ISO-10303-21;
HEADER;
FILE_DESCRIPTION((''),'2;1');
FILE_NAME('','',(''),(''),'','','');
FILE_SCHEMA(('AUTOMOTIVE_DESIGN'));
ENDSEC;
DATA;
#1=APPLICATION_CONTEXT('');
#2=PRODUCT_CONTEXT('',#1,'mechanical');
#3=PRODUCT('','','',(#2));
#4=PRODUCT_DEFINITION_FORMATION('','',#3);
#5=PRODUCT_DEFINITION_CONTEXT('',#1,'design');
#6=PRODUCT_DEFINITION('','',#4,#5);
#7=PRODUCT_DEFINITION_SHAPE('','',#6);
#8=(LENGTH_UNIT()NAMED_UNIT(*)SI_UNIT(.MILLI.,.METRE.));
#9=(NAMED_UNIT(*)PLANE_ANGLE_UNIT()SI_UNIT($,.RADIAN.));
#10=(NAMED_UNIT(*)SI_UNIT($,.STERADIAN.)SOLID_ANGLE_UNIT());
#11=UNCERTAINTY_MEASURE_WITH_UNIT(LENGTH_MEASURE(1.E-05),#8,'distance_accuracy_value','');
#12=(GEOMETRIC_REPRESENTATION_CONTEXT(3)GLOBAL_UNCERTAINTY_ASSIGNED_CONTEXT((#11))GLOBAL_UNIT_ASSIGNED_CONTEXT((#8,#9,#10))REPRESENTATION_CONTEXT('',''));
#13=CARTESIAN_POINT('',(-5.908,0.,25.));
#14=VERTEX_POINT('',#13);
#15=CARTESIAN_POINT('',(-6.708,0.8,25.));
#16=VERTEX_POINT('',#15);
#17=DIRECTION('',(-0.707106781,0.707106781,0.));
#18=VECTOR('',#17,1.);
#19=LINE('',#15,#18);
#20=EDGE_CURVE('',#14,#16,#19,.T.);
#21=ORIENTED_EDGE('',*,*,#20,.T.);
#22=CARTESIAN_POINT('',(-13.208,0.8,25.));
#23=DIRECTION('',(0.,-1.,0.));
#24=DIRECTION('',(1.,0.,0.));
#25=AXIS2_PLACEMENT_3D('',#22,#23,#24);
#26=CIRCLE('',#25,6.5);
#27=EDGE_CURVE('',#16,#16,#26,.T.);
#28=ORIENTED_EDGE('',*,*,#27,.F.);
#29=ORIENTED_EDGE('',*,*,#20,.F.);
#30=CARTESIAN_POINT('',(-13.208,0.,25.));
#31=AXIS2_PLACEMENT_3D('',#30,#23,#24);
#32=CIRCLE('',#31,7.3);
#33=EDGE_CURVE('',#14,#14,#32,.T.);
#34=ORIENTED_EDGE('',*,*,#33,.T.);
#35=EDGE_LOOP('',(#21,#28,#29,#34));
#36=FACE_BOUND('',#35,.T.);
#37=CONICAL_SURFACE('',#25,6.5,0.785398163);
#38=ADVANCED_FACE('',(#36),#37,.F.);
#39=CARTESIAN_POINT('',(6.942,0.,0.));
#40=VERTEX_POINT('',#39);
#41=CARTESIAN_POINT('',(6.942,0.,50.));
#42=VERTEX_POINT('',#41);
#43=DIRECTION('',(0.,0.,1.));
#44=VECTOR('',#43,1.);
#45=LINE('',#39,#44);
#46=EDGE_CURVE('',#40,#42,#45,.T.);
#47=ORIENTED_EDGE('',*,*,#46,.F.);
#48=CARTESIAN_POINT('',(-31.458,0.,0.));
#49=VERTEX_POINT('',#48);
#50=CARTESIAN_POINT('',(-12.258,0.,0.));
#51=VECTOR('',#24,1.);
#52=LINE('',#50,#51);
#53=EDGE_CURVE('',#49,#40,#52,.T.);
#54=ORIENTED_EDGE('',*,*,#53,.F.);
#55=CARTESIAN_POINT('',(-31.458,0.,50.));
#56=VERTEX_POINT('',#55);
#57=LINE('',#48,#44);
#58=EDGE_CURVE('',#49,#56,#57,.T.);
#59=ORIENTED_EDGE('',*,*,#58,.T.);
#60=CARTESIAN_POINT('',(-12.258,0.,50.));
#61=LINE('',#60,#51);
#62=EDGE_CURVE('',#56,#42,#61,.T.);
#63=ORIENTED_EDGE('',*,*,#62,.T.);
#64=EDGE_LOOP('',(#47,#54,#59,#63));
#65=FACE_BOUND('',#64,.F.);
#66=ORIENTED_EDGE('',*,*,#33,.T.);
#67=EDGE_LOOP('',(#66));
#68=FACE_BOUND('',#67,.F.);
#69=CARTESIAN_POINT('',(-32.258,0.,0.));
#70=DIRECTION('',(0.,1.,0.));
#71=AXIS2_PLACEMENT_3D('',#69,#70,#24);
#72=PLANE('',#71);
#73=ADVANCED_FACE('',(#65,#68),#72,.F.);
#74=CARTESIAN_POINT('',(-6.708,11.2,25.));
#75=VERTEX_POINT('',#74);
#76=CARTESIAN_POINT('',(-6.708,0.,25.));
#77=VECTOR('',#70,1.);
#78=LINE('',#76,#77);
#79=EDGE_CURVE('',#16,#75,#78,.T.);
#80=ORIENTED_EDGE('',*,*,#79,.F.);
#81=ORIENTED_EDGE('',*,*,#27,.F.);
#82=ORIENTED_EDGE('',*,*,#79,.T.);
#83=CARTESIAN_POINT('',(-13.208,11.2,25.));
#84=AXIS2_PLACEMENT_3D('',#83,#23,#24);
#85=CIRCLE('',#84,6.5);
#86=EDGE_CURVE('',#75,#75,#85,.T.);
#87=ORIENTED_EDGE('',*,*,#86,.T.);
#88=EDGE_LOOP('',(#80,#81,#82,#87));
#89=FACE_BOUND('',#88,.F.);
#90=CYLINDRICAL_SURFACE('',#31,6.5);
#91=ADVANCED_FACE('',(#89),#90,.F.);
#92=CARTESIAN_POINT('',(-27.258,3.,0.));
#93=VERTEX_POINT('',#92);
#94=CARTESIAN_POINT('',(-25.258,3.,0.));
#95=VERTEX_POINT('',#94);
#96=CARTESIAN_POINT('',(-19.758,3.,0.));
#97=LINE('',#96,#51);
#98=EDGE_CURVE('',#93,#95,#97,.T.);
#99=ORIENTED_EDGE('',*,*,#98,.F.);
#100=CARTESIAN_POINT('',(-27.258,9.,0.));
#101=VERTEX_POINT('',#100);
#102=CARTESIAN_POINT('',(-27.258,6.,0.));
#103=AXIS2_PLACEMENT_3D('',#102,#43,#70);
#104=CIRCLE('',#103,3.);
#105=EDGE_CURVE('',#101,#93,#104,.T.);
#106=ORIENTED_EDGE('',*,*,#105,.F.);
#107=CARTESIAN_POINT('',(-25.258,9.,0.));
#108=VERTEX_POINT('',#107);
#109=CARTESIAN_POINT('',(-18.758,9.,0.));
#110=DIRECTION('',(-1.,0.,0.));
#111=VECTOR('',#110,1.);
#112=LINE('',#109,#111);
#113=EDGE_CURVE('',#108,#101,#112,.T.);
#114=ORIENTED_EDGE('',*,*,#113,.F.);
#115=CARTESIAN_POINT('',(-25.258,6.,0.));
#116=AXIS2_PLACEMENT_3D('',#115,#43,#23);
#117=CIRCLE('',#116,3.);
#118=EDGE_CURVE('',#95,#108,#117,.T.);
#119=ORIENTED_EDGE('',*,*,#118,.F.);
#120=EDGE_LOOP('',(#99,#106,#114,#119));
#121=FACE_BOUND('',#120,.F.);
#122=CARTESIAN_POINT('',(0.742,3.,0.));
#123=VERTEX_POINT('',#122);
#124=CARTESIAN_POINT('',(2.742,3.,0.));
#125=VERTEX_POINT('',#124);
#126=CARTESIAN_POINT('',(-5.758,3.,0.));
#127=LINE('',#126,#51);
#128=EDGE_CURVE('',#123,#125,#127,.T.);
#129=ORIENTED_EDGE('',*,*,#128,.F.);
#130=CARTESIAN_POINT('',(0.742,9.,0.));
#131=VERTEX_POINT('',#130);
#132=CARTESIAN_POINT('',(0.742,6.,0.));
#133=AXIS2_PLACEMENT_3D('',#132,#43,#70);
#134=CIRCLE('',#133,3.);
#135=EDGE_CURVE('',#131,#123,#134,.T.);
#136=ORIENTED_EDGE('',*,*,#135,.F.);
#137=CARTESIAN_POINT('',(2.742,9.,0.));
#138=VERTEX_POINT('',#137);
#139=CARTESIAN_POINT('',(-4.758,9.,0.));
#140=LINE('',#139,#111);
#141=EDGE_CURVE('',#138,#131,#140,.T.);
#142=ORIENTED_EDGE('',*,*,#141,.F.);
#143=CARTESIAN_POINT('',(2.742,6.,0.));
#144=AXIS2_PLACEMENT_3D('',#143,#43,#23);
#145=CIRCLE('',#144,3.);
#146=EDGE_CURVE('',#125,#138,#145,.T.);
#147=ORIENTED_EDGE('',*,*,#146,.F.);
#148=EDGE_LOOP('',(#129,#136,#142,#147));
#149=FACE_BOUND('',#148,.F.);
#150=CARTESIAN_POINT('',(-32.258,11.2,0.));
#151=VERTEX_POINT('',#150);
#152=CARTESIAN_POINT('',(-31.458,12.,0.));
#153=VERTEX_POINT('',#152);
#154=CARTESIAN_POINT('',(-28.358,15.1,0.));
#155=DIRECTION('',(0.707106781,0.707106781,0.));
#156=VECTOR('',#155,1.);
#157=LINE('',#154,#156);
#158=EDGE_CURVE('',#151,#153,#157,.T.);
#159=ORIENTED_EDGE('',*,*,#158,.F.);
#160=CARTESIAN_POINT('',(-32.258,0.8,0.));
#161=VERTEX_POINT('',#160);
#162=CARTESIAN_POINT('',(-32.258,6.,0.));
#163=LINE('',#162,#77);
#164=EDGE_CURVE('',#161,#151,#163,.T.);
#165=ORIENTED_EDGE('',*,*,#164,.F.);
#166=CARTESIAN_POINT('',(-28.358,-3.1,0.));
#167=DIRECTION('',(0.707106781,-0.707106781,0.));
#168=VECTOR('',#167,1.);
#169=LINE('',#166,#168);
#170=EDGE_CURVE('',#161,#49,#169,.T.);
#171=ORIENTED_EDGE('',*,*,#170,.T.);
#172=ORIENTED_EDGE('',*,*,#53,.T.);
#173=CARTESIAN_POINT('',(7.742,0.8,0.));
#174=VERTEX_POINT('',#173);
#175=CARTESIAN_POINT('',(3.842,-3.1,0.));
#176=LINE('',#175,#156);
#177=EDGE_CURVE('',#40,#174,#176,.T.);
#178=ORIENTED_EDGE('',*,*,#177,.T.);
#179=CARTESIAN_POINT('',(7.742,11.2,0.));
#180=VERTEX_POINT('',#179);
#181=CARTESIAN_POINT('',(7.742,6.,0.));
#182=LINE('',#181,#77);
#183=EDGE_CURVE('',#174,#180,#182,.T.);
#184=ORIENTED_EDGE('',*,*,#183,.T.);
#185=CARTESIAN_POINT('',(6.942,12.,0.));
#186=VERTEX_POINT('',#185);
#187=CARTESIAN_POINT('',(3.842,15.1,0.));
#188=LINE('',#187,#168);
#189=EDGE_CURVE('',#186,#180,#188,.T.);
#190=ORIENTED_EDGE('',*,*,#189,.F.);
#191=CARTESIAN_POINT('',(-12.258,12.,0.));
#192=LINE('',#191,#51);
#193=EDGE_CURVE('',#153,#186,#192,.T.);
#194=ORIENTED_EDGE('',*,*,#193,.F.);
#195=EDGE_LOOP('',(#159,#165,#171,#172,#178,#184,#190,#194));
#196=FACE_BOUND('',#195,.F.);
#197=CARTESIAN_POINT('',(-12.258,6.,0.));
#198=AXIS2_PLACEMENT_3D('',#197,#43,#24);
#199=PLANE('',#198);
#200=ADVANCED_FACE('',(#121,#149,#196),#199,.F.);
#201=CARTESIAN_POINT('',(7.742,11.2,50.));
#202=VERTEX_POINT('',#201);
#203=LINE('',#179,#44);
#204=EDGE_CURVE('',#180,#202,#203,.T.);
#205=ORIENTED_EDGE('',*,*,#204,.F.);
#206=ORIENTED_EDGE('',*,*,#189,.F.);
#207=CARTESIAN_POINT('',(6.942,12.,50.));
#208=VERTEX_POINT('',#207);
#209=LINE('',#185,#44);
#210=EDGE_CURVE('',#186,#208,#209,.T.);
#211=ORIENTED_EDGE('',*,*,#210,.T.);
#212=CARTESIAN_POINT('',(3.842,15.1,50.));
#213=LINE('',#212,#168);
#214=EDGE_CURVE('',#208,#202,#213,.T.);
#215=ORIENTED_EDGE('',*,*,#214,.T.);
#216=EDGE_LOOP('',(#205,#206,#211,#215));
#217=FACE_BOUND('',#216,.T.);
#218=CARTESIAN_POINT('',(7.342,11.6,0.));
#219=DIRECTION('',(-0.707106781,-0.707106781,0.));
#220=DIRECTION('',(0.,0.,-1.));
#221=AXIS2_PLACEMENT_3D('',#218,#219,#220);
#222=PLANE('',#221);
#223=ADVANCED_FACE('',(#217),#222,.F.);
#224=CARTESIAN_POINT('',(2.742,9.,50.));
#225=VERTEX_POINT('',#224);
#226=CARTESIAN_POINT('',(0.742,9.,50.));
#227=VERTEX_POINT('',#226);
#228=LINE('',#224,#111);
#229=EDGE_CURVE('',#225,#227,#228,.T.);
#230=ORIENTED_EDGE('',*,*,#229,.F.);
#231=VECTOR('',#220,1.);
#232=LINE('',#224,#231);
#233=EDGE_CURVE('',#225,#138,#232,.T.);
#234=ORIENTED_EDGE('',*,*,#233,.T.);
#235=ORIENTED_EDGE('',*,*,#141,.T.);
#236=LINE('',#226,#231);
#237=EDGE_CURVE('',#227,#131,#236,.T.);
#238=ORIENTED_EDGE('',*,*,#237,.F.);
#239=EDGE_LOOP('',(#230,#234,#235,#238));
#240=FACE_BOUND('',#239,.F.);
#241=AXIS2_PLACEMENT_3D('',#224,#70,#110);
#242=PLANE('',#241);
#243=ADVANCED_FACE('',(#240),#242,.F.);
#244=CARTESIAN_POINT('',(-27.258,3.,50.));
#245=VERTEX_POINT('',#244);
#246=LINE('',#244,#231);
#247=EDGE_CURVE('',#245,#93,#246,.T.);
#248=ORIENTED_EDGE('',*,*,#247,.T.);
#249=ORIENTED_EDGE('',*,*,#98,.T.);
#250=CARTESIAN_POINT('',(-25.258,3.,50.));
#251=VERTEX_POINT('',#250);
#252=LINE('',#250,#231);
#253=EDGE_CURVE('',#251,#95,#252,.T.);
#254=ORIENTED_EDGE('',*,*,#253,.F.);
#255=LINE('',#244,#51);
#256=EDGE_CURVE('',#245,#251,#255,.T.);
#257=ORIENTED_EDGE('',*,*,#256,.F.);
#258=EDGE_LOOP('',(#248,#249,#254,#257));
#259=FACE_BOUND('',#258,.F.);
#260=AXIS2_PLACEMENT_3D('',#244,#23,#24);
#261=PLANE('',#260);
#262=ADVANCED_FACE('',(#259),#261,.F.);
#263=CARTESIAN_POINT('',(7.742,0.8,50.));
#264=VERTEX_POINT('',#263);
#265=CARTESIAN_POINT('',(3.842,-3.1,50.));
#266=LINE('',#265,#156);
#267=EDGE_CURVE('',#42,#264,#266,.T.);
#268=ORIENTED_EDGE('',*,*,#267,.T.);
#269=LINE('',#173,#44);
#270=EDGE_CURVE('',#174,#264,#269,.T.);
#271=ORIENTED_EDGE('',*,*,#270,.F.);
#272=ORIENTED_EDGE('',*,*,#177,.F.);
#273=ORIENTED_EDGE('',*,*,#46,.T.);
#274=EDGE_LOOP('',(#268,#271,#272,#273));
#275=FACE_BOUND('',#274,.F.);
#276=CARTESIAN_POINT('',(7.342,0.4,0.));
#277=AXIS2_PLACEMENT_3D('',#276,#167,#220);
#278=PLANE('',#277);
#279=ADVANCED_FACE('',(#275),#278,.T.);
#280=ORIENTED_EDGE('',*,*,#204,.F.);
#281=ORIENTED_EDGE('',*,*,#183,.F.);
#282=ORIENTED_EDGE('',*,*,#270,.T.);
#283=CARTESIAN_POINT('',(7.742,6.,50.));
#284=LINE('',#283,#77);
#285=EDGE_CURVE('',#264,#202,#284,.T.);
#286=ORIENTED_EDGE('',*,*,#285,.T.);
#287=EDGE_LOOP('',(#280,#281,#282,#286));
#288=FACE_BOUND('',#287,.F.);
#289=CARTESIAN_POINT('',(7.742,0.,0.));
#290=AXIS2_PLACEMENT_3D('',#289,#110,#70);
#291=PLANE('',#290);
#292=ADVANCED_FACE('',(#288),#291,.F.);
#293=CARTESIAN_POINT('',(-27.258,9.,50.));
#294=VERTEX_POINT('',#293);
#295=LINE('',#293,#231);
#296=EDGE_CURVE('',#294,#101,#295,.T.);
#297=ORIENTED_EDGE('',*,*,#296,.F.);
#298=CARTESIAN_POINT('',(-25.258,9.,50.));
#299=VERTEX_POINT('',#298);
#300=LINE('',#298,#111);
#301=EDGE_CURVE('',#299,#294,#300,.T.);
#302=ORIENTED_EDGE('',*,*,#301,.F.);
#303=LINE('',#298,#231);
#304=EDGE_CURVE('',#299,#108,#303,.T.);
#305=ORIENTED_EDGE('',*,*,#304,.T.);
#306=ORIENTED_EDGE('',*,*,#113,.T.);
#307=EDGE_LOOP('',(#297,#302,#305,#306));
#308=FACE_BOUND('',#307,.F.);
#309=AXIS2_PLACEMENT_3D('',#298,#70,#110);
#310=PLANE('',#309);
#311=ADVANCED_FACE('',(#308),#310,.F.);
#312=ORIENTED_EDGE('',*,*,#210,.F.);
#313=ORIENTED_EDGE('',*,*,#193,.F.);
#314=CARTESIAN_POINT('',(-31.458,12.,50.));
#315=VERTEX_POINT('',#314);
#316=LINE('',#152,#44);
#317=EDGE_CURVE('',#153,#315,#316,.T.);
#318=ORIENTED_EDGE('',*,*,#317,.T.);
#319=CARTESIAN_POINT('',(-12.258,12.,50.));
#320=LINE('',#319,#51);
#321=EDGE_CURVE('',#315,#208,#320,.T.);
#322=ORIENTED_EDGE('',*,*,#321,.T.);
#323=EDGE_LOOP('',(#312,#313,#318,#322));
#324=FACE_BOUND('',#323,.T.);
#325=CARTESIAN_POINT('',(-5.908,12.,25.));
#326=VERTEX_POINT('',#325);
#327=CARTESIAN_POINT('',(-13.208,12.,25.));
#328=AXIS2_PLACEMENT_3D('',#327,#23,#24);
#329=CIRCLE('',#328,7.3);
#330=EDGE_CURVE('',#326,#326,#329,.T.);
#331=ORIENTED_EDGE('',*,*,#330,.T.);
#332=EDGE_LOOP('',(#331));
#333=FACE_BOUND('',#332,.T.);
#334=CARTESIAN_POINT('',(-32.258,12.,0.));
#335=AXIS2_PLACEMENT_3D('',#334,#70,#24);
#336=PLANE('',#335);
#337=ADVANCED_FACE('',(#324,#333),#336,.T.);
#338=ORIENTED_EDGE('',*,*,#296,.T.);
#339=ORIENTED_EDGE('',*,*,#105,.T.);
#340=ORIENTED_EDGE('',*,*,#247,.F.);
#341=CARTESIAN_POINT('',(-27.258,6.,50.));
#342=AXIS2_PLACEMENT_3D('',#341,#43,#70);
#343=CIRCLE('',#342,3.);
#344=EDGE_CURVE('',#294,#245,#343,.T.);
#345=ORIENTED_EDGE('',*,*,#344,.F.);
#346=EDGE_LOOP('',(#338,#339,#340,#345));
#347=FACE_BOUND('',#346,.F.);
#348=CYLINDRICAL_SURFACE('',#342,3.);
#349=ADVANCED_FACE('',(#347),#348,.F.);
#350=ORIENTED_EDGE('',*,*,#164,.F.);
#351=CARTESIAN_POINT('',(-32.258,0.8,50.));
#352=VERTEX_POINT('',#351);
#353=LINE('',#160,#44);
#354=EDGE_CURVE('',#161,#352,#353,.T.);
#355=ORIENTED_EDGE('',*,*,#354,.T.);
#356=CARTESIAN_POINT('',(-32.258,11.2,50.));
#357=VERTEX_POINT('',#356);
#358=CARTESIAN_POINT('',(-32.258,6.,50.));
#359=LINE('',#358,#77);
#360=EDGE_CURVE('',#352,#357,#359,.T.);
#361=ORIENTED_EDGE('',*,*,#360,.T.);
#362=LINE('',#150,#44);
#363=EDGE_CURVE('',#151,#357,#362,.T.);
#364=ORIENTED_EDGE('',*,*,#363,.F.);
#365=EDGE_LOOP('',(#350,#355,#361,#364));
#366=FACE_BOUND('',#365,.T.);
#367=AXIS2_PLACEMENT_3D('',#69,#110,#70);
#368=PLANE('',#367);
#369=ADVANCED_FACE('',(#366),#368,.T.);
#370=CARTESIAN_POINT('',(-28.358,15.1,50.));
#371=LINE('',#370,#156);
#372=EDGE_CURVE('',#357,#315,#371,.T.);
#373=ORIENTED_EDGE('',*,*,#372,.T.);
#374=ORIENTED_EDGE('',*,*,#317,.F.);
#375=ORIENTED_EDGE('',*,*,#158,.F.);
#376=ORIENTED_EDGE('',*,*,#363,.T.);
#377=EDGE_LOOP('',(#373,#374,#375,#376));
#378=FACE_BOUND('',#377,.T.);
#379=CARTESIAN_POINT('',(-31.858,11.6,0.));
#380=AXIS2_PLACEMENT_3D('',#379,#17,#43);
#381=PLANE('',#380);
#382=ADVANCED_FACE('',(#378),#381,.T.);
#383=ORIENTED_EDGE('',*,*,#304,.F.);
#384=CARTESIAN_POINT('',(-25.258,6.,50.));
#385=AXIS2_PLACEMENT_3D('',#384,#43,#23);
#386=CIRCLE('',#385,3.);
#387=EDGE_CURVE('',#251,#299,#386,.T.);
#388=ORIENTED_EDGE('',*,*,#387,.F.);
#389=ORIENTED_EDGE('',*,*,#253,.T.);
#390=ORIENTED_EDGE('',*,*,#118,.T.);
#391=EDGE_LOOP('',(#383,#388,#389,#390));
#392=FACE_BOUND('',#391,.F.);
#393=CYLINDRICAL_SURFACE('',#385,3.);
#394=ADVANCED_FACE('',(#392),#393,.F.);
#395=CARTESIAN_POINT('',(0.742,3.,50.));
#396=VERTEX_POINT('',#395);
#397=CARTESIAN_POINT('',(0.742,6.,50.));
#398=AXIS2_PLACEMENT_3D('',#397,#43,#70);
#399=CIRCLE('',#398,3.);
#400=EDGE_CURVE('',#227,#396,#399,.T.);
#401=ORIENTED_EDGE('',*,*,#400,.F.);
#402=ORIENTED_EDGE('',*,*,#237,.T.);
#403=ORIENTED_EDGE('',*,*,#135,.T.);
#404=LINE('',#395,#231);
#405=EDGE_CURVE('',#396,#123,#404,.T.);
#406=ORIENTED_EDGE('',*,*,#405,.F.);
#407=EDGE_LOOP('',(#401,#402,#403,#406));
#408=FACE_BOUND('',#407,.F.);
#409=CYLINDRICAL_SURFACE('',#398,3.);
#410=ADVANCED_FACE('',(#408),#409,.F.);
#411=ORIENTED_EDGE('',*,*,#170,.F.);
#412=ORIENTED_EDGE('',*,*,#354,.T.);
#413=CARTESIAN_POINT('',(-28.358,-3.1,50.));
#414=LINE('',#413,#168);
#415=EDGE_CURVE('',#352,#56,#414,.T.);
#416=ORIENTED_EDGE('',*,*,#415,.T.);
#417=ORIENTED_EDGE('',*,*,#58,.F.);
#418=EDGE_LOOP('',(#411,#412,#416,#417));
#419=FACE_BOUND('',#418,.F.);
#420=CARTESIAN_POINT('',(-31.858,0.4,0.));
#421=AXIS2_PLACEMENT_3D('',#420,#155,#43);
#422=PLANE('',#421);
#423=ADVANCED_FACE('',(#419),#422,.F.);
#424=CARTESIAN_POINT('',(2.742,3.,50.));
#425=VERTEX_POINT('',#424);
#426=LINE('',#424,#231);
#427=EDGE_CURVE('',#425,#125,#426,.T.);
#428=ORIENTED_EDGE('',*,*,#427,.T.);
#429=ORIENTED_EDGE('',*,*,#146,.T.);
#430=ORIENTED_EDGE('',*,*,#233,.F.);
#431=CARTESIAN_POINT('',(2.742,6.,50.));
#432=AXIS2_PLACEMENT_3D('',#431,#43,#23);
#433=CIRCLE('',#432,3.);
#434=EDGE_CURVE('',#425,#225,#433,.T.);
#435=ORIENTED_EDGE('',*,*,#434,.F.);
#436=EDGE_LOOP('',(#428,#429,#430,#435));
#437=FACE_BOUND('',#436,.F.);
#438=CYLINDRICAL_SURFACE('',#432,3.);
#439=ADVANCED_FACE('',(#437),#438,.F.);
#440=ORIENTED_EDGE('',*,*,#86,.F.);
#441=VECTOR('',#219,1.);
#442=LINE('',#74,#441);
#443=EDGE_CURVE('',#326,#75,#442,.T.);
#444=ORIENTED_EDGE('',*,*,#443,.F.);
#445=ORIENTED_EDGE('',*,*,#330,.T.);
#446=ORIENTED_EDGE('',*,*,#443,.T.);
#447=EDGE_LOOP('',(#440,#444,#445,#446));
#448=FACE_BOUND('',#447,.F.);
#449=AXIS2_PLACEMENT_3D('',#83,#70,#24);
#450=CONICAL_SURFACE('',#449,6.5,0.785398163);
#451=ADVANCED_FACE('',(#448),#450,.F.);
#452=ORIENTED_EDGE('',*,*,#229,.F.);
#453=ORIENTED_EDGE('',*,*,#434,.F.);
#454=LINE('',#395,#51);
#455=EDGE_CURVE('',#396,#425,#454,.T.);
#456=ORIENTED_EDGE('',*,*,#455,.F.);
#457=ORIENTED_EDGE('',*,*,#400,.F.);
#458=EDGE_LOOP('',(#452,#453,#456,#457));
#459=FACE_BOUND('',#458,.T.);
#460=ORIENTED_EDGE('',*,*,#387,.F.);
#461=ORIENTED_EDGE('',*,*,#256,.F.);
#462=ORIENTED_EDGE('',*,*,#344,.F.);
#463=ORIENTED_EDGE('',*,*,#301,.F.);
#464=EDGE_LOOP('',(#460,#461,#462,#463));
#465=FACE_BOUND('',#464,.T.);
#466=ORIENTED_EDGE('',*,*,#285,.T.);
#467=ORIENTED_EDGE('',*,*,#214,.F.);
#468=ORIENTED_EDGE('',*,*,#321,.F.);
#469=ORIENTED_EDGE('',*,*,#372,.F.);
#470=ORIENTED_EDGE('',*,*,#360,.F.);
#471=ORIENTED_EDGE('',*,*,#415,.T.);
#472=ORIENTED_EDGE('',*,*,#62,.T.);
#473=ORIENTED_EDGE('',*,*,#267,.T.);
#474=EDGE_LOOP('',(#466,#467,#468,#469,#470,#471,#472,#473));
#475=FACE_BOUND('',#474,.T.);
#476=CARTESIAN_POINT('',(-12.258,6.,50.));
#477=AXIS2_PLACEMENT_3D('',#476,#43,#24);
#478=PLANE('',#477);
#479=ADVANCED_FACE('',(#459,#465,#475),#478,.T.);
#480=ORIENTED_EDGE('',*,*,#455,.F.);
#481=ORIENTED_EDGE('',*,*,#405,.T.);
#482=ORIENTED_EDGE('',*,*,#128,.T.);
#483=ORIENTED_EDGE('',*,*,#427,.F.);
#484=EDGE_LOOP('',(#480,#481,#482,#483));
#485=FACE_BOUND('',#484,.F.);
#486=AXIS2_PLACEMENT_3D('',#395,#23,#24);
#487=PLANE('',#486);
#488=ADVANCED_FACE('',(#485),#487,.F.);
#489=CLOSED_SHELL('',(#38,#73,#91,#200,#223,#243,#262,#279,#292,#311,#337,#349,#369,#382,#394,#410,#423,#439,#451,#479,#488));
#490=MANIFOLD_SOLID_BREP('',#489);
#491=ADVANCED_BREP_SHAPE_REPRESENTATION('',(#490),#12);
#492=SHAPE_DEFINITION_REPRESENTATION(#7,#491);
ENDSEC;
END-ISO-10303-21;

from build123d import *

# Parameters (mm, degrees)
F0_W     = 40
F0_H     = 12
F1_DEPTH = 50
F3_DEPTH = 55
F4_R     = 6.5
F5_DEPTH = 13
F6_SIZE  = 0.8


# Not quite as in the source:
# - a feature names something its author has since deleted; it is built from what else it names


with BuildPart() as f1:
    # F0 (on Top) → F1 (new body)
    with BuildSketch(Plane.XY):
        with Locations((-12.258, 6)):
            Rectangle(F0_W, F0_H)
    extrude(amount=F1_DEPTH)

    # F2 (on face) → F3 (cut)
    with BuildSketch(Plane.XY.offset(50)):
        with BuildLine():
            Line((-25.258, 9), (-27.258, 9))
            ThreePointArc((-27.258, 9), (-30.258, 6), (-27.258, 3))
            Line((-27.258, 3), (-25.258, 3))
            ThreePointArc((-25.258, 3), (-22.258, 6), (-25.258, 9))
        make_face()
        with BuildLine():
            Line((0.742, 3), (2.742, 3))
            ThreePointArc((2.742, 3), (5.742, 6), (2.742, 9))
            Line((2.742, 9), (0.742, 9))
            ThreePointArc((0.742, 9), (-2.258, 6), (0.742, 3))
        make_face()
    extrude(amount=-F3_DEPTH, mode=Mode.SUBTRACT)

    # F4 (on face) → F5 (cut)
    with BuildSketch(Plane.XZ):
        with Locations((-13.208, 25)):
            Circle(F4_R)
    extrude(amount=-F5_DEPTH, mode=Mode.SUBTRACT)

    # F6
    f6_edges = [f1.edges().sort_by_distance(p)[0] for p in [
        (7.742, 0, 25),
        (-32.258, 12, 25),
        (-32.258, 0, 25),
        (-19.708, 12, 25),
        (-19.708, 0, 25),
        (7.742, 12, 25),
    ]]
    chamfer(f6_edges, length=F6_SIZE)


solid = f1.part
